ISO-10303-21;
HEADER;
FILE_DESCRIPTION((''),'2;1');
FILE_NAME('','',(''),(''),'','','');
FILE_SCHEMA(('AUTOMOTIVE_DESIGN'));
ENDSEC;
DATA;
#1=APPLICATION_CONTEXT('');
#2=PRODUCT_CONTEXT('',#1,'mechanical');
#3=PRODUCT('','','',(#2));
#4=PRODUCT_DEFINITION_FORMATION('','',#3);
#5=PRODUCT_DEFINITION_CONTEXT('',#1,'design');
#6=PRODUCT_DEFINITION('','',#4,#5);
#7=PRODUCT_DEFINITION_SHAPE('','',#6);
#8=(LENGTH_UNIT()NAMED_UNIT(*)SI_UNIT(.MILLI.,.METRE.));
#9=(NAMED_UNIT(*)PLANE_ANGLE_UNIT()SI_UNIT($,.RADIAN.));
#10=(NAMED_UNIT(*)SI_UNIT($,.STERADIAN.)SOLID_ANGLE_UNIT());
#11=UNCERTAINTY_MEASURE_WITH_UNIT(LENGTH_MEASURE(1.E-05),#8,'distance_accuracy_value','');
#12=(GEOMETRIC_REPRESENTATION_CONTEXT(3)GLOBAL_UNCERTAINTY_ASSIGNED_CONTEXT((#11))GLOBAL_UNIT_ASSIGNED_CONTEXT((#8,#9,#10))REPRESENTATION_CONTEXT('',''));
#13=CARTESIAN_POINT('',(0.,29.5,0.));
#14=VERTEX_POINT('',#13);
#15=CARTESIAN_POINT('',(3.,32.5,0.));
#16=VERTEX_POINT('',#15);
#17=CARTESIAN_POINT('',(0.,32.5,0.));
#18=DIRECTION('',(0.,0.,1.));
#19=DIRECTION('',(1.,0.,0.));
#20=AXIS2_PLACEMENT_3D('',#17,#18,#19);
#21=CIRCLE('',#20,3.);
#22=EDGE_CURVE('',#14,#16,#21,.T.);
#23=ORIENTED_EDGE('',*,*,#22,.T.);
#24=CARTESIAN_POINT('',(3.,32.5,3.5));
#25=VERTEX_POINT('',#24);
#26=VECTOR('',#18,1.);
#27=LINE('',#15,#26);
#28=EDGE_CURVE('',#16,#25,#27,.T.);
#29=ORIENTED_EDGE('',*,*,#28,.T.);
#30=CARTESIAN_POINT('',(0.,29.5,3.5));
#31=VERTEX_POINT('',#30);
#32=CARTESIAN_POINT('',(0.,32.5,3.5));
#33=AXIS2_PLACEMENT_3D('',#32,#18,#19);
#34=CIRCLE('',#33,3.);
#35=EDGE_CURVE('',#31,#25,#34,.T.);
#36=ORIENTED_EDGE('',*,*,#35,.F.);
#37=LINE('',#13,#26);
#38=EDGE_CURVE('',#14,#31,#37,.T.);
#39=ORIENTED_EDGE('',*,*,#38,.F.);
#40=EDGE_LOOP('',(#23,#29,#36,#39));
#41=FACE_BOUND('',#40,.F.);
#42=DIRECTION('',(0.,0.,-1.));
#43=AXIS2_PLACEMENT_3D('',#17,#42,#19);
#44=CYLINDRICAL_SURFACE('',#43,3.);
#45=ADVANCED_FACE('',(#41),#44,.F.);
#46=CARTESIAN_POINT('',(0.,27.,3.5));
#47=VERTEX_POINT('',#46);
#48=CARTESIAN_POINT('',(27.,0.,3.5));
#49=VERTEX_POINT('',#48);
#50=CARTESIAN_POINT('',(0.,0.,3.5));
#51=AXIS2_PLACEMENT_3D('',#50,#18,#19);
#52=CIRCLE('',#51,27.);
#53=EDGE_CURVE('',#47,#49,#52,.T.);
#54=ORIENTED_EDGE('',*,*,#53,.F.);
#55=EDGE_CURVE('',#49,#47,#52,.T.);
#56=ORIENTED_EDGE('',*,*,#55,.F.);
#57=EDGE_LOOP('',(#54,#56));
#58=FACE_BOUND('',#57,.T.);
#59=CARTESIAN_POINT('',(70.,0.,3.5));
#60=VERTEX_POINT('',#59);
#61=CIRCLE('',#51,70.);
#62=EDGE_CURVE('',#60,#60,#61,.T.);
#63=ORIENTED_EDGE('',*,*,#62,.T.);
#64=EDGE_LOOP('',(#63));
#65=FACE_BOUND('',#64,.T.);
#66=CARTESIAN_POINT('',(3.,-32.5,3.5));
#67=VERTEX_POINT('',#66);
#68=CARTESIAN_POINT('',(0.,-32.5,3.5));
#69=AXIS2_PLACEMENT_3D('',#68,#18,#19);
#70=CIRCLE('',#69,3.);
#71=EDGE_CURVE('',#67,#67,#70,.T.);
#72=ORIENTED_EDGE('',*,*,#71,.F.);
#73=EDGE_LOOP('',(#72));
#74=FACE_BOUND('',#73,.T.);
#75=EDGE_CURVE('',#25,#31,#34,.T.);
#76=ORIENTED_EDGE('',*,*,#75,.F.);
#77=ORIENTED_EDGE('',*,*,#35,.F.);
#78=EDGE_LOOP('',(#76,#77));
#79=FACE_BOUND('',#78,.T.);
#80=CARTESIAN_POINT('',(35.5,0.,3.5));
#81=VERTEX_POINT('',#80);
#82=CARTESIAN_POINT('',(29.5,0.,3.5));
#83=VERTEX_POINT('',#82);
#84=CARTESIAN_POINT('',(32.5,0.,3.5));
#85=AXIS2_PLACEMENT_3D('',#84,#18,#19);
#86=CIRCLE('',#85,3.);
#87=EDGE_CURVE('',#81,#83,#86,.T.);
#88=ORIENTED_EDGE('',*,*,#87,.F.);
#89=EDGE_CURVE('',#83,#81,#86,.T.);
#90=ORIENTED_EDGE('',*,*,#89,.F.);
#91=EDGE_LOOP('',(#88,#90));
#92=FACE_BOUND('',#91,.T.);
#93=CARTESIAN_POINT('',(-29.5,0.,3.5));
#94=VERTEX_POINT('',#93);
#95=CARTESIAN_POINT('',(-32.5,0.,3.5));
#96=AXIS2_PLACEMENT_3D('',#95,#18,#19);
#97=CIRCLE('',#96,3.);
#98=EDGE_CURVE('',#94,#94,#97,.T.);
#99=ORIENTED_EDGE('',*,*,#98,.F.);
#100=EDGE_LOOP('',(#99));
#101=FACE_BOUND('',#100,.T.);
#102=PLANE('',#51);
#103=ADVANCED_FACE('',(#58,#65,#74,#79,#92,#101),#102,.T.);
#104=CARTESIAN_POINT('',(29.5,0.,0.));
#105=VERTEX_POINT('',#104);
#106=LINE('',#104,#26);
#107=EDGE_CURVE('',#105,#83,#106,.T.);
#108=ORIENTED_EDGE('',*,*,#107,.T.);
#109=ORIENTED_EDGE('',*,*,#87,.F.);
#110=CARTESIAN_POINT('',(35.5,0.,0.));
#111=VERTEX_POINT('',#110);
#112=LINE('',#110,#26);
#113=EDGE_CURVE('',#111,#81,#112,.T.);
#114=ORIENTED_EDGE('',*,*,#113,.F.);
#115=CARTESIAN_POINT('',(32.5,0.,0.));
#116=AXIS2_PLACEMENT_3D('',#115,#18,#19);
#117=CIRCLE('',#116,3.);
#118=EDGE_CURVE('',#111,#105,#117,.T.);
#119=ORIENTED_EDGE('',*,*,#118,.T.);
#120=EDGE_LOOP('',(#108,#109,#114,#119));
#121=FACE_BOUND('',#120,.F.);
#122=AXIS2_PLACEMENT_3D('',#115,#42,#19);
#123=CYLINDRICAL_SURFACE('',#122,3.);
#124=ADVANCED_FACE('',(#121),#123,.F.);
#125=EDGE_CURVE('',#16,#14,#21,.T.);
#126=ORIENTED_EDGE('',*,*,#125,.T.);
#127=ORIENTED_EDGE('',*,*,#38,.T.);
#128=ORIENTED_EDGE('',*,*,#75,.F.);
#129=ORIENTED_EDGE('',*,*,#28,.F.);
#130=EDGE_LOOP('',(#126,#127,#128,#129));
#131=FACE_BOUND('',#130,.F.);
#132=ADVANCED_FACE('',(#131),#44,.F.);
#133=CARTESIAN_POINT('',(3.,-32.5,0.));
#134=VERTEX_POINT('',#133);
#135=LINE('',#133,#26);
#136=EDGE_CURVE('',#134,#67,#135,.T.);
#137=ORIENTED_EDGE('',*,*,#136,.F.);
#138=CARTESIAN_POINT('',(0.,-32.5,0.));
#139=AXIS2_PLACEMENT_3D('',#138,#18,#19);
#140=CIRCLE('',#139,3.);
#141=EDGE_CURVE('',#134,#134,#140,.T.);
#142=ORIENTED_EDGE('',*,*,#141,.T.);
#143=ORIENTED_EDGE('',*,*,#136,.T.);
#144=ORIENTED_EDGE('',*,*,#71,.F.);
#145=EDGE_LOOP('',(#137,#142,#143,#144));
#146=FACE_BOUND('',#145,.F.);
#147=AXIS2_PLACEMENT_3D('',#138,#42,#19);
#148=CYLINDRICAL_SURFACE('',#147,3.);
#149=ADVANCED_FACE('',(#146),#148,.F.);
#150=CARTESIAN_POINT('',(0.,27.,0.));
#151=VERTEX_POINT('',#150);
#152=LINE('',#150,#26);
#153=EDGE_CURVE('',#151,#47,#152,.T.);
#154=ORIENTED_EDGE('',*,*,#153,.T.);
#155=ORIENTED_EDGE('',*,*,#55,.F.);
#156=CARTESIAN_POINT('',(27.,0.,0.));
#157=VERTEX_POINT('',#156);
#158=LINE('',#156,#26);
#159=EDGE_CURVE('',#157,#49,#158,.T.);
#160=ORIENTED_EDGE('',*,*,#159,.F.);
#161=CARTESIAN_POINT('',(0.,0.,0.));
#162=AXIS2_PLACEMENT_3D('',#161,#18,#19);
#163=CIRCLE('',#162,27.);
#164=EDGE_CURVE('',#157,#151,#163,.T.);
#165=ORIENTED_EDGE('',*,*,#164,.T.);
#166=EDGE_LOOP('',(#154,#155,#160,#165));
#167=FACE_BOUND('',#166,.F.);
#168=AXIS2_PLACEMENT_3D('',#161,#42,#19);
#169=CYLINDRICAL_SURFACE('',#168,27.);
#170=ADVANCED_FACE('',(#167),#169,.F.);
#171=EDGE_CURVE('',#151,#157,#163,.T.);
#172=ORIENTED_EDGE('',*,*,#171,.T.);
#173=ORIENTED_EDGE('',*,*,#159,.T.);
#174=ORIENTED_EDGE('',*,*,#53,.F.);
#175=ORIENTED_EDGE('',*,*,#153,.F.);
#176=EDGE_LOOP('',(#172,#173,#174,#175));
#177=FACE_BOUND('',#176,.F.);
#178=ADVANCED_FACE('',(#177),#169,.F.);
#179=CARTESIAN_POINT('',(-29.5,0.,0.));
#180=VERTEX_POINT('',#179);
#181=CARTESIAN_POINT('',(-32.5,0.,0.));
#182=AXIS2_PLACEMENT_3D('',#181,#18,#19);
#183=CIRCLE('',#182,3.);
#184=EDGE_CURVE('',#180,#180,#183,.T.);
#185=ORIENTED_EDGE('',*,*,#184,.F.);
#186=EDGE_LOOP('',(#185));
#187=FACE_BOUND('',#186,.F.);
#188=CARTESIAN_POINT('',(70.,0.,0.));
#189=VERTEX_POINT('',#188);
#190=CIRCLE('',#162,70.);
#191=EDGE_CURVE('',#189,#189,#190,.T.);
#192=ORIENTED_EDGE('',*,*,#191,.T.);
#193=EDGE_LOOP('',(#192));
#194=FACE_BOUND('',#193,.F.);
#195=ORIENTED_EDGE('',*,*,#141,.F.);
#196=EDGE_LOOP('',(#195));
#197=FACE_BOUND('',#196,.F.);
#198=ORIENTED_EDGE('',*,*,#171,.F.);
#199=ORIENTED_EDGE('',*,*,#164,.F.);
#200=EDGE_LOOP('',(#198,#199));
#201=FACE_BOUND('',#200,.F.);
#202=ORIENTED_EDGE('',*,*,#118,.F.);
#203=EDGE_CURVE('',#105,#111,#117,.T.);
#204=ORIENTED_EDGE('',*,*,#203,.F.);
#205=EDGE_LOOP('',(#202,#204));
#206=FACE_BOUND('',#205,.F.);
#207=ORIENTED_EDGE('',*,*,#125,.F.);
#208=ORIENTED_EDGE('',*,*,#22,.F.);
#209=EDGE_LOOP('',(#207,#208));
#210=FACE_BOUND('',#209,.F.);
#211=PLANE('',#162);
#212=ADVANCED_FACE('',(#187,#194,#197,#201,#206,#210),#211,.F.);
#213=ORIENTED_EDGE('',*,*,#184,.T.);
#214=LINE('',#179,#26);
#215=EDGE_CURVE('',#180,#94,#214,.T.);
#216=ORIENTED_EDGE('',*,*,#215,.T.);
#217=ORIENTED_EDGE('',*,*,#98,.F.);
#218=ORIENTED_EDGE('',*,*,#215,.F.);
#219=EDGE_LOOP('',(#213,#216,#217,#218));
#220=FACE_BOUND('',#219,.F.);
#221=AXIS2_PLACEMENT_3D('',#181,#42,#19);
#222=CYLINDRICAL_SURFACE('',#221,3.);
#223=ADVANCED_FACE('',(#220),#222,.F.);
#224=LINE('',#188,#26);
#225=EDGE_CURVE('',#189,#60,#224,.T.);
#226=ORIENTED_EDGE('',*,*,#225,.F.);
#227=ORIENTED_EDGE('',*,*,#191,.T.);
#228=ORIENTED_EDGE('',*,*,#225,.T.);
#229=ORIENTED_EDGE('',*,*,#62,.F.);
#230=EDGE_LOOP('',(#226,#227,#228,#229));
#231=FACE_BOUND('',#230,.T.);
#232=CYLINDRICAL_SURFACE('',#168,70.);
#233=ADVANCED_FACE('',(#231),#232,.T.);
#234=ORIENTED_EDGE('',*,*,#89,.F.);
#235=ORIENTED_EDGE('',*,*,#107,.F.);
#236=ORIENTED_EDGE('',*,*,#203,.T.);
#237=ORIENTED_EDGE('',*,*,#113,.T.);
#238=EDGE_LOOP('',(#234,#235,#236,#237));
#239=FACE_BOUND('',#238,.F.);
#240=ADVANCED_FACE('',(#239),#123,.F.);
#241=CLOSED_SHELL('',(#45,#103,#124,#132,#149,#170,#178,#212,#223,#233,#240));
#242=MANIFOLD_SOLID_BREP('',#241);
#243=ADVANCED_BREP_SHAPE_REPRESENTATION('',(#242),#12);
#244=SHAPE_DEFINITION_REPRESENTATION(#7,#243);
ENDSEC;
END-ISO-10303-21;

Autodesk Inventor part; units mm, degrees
ref_plane "YZ Plane" through (0, 0, 0) normal (1, 0, 0) x (0, 1, 0)
ref_plane "XZ Plane" through (0, 0, 0) normal (0, 1, 0) x (-1, 0, 0)
ref_plane "XY Plane" through (0, 0, 0) normal (0, 0, 1) x (1, 0, 0)
sketch "Sketch1" plane through (0, 0, 0) normal (0, 0, 1) x (1, 0, 0)
  circle A0 centre (0, 0) radius 70
  line L0 (0, 0) -> (32.5, 0)
  circle A1 centre (32.5, 0) radius 3
  line L1 (0, 0) -> (0, 32.5)
  circle A2 centre (0, 32.5) radius 3
  circle A3 centre (-32.5, 0) radius 3
  circle A4 centre (0, -32.5) radius 3
  circle A5 centre (0, 0) radius 27
  dimension "d0" = 140
  dimension "d1" = 32.5
  dimension "d2" = 6
  dimension "d3" = 32.5
  dimension "d4" = 6
  dimension "d5" = 54
extrude "Extrusion1" add sketch "Sketch1" along normal blind 3.5
properties part number "Sprocket"
